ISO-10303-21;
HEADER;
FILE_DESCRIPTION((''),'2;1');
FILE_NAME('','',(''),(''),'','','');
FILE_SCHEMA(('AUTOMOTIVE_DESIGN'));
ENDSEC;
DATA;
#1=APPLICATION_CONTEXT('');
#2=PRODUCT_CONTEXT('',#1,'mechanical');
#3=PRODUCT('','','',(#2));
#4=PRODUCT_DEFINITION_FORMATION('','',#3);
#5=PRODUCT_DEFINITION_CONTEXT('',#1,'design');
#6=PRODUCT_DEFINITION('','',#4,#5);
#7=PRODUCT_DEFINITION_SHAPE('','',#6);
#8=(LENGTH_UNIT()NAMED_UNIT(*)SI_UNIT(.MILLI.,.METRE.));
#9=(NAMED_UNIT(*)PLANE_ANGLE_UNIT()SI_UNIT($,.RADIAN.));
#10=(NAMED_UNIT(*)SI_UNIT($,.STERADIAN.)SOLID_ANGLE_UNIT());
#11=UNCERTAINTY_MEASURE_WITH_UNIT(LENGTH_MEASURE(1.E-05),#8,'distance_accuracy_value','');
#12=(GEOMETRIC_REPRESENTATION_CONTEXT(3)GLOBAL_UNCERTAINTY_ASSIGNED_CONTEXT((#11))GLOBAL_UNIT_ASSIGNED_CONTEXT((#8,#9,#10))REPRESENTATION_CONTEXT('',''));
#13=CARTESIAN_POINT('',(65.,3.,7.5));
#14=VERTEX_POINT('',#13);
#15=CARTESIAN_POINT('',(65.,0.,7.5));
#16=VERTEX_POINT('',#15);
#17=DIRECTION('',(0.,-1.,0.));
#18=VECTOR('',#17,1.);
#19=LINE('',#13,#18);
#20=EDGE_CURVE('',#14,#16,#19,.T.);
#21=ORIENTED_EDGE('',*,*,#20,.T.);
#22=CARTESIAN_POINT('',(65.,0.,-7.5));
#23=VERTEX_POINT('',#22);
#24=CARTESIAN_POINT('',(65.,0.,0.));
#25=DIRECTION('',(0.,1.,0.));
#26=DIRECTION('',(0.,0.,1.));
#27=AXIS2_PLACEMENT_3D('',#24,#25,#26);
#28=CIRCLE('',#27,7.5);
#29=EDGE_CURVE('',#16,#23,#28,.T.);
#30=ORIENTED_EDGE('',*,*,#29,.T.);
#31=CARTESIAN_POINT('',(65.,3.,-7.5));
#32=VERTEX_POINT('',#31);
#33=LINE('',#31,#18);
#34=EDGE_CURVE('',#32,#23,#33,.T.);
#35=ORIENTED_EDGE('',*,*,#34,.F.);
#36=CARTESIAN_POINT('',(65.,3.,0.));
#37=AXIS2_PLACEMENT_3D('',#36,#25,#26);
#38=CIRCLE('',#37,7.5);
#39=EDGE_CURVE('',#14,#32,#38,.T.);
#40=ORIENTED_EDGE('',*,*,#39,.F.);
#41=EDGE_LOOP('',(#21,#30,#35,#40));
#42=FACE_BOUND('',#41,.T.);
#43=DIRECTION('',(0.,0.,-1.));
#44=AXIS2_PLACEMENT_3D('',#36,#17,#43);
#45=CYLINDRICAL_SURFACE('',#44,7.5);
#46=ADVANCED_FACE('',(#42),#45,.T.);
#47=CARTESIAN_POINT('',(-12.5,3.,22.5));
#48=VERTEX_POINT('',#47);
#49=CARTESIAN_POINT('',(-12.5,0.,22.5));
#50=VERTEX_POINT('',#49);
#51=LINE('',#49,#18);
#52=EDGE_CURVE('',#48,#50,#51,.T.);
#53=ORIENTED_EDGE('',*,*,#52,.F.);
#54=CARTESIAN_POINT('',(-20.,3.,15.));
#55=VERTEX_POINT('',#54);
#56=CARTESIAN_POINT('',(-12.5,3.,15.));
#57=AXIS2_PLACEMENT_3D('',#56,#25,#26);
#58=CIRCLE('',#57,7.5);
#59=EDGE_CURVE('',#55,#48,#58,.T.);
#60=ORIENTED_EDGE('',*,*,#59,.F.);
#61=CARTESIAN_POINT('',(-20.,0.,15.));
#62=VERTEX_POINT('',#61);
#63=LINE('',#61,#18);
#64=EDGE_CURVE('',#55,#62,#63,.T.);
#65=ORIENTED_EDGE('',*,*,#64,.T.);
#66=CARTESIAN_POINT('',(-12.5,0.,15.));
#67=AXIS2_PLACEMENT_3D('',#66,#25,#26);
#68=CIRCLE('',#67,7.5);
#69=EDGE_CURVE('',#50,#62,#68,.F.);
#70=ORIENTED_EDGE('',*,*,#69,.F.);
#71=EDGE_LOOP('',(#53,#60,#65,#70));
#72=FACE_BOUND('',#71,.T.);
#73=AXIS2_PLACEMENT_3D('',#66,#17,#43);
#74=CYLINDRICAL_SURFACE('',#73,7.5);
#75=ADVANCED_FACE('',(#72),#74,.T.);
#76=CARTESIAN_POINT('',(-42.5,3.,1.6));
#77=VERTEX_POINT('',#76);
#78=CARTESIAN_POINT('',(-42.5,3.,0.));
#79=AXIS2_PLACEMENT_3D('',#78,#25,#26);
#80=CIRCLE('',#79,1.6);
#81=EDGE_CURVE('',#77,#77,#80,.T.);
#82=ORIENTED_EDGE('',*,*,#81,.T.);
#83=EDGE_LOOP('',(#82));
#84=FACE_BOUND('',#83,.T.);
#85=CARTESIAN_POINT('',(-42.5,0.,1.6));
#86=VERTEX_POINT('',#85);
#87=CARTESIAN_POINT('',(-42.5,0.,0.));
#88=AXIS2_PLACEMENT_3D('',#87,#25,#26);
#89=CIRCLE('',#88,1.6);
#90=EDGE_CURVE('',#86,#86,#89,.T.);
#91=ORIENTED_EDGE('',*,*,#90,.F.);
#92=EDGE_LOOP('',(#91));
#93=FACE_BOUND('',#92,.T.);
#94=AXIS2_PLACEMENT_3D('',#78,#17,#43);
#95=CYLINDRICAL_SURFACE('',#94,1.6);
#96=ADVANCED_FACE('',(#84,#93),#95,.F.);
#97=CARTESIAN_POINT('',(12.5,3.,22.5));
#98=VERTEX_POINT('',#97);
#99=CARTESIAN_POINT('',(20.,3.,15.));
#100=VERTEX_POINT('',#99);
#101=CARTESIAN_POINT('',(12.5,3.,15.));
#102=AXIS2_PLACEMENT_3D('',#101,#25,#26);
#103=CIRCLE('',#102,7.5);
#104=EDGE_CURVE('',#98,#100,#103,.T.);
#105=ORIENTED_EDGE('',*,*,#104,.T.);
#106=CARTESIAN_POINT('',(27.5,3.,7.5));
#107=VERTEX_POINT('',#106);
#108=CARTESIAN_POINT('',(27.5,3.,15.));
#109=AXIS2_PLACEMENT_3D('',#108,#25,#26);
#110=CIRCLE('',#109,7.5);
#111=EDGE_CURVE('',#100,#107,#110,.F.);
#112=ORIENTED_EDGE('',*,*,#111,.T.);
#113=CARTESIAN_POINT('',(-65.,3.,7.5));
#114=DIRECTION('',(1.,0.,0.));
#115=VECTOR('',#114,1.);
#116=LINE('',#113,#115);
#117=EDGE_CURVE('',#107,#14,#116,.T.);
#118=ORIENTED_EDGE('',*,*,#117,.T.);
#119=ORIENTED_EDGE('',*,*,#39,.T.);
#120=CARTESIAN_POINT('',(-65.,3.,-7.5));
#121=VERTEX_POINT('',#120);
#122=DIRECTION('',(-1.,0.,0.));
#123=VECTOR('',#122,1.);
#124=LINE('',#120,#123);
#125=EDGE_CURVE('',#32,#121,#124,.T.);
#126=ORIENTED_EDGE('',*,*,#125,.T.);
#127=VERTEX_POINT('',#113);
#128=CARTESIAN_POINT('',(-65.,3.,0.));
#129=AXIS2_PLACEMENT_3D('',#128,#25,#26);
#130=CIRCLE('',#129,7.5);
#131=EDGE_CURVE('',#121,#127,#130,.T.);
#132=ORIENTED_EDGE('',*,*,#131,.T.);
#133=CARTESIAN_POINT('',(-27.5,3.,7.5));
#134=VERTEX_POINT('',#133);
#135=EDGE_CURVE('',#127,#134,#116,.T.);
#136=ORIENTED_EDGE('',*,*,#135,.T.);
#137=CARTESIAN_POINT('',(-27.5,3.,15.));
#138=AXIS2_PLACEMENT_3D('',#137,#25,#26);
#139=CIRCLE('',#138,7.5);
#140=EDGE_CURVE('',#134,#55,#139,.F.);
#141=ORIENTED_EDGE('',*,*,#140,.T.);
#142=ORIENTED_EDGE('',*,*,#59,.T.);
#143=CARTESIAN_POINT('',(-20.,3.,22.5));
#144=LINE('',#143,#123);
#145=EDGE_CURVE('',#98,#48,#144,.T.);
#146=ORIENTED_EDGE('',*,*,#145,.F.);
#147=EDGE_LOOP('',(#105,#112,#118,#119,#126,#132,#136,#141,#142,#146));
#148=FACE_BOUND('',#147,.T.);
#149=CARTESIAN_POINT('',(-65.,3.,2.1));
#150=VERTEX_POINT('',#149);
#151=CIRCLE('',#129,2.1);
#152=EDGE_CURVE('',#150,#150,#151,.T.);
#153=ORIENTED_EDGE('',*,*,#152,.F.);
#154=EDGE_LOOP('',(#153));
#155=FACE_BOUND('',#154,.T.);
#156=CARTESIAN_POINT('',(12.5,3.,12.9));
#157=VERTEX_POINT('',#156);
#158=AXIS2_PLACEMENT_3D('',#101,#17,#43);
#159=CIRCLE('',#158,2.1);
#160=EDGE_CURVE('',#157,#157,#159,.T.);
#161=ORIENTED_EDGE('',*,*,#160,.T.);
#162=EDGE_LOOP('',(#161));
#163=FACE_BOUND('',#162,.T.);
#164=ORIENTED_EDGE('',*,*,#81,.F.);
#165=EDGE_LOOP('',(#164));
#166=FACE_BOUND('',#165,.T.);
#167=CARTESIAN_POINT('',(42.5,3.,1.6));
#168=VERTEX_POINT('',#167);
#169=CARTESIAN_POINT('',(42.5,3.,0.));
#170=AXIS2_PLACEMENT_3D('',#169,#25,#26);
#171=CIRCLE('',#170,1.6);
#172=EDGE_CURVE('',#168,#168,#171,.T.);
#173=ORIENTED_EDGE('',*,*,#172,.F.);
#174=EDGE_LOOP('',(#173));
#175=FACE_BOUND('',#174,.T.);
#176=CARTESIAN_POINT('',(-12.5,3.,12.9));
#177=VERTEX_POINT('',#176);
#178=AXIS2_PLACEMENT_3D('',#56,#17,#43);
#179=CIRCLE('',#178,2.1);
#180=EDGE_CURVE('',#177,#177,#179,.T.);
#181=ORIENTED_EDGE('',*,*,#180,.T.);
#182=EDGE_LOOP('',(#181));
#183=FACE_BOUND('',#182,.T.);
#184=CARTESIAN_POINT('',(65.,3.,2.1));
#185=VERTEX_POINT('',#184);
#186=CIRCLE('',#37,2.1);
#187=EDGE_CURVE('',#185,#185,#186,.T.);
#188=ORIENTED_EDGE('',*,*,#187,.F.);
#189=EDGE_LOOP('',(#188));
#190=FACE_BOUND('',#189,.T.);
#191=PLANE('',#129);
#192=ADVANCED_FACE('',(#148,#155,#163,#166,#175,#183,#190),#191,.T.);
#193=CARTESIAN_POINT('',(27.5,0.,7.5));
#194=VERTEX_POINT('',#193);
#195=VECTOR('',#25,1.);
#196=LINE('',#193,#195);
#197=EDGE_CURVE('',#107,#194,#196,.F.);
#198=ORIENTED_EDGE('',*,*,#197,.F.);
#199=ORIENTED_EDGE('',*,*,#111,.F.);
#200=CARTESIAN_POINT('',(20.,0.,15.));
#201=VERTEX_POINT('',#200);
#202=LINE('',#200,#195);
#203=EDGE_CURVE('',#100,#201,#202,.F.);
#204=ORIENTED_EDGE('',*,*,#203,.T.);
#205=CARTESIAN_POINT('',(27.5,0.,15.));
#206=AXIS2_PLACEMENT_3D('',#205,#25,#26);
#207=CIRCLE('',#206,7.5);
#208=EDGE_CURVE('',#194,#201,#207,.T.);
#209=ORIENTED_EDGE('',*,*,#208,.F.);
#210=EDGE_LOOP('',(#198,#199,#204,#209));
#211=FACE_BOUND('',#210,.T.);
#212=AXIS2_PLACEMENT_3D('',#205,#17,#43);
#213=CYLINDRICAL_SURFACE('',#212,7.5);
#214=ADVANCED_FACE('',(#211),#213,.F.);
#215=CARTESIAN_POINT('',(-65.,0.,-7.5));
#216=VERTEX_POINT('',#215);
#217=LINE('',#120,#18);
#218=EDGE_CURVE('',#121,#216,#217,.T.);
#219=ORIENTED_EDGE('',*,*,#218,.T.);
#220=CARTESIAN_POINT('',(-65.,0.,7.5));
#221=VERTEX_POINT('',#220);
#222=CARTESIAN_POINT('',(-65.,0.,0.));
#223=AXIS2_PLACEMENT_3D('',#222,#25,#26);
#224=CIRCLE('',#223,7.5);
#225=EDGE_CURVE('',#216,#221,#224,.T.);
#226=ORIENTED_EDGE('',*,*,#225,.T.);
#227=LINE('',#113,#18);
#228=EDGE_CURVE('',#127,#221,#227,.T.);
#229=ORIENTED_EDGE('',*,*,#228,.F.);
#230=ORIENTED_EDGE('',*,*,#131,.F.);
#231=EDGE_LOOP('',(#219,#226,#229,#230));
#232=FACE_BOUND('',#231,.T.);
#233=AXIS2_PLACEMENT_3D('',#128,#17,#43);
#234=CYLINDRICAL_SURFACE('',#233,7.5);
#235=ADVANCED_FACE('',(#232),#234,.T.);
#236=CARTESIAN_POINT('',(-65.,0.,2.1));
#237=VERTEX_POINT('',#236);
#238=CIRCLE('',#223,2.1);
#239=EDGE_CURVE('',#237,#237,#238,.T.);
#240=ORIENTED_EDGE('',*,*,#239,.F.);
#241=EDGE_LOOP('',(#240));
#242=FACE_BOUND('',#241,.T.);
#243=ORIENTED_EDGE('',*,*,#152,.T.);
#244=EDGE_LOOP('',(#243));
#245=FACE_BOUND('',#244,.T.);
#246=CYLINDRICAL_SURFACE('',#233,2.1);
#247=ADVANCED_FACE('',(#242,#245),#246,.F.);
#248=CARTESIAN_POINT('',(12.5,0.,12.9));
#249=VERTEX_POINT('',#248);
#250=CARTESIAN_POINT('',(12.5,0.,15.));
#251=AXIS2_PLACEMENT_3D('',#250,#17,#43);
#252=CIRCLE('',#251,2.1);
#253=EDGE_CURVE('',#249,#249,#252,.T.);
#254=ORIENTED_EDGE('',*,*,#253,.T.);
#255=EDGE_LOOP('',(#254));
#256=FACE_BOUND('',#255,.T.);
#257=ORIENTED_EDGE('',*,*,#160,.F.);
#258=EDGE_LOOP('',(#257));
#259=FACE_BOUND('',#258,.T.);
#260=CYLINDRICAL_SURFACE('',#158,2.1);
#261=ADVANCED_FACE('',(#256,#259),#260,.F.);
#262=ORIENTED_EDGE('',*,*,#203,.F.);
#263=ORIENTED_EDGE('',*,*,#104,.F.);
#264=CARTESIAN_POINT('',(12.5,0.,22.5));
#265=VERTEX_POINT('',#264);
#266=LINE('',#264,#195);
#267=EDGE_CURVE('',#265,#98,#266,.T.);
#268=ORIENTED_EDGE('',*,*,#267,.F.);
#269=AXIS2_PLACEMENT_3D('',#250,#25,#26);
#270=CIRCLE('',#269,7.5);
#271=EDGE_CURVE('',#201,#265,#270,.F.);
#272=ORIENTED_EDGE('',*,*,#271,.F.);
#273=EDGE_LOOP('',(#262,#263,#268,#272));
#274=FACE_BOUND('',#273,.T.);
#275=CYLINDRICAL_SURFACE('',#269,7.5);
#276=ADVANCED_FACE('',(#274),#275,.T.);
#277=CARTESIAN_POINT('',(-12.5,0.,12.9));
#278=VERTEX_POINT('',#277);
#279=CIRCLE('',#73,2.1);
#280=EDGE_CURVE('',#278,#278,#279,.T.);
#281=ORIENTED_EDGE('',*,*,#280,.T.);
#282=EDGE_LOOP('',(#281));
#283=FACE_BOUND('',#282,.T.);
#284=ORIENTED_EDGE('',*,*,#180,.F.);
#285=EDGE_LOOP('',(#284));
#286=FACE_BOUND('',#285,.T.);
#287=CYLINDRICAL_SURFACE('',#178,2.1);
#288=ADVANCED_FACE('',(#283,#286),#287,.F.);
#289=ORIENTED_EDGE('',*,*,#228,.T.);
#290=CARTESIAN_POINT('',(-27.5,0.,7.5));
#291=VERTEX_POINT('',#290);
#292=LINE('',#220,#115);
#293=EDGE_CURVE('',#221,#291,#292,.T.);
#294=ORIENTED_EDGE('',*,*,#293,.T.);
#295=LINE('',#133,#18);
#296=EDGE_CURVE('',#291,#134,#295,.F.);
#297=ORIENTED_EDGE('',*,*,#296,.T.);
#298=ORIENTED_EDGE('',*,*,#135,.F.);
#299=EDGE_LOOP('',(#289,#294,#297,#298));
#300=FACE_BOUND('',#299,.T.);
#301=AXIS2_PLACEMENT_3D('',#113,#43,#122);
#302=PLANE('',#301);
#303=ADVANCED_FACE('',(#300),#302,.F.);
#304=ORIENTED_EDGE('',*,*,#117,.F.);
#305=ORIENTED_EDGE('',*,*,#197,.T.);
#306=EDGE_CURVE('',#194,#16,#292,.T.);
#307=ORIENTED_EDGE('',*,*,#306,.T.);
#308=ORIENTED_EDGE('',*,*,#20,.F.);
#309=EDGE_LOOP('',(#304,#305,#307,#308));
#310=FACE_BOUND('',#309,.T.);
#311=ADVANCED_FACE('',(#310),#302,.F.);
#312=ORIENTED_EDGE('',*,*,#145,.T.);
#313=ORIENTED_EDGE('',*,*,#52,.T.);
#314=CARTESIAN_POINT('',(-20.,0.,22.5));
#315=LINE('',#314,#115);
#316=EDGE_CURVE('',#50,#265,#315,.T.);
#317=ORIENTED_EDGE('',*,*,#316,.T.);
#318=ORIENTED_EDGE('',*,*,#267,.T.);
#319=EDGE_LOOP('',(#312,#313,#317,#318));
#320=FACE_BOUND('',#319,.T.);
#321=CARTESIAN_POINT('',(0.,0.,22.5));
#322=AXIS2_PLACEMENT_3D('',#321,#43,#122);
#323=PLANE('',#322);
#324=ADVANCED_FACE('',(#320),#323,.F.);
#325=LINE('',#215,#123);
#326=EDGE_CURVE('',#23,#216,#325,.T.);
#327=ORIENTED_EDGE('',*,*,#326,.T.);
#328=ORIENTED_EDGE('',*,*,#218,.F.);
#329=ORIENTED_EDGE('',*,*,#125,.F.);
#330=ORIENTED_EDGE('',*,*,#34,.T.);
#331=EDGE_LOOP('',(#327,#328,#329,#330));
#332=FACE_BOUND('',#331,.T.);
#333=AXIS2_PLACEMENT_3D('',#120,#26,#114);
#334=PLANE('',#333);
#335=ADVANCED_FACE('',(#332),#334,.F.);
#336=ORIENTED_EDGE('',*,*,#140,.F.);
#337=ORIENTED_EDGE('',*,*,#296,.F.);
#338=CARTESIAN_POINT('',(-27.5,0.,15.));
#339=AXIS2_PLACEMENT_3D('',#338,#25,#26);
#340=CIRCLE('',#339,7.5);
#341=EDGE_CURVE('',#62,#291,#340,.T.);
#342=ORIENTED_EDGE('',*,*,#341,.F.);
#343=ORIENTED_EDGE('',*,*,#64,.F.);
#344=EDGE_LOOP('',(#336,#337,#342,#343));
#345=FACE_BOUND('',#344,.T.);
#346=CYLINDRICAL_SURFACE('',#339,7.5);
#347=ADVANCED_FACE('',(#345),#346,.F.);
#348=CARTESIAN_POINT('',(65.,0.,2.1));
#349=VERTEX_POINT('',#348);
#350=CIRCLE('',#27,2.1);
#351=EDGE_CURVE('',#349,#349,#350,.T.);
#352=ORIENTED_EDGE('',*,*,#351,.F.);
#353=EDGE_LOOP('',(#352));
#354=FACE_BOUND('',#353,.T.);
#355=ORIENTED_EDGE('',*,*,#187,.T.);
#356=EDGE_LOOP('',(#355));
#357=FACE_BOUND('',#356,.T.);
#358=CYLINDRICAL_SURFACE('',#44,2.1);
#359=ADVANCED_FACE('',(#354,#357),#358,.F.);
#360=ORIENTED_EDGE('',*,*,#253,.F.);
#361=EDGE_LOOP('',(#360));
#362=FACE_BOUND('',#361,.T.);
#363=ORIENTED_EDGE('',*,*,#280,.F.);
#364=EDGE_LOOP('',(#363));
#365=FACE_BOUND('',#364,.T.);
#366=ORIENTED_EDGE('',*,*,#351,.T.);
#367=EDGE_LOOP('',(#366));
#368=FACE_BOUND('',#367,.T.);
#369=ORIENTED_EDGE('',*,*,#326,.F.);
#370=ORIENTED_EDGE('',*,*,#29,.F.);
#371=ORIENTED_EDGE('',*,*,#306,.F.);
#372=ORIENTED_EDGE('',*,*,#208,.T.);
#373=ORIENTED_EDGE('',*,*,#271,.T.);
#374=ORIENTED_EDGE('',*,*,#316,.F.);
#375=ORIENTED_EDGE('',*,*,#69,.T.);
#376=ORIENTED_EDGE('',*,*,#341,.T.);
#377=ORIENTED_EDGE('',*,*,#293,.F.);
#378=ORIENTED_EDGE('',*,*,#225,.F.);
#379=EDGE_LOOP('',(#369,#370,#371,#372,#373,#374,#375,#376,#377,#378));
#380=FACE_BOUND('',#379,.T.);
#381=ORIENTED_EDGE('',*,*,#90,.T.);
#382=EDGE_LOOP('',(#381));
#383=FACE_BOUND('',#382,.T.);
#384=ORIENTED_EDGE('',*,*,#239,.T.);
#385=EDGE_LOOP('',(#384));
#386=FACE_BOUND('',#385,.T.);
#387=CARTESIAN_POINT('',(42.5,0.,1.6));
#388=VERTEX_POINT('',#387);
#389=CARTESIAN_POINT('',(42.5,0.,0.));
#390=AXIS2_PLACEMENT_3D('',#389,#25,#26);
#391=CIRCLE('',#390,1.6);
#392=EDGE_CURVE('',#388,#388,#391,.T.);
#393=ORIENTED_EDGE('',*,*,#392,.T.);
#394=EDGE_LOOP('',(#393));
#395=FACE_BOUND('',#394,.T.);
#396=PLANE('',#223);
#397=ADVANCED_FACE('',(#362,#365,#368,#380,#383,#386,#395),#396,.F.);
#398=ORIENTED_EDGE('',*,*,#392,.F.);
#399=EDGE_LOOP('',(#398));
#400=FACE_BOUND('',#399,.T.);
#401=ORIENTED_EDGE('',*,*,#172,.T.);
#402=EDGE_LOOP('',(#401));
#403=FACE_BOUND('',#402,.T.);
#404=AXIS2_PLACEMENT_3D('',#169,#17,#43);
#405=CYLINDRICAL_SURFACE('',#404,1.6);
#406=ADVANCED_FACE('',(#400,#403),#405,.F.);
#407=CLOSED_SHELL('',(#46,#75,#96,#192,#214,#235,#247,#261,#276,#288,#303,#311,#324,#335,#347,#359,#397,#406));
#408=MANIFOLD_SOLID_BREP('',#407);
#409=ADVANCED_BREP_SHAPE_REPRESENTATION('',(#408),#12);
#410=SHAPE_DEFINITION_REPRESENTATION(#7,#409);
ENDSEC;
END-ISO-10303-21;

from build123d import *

# Parameters (mm, degrees)
SKETCH_1_R          = 1.6
SKETCH_1_R_2        = 2.1
EXTRUDE_1_DEPTH     = 3
SKETCH_3_W          = 40
SKETCH_3_H          = 3
EXTRUDE_3_DEPTH     = 15
SKETCH_2_R          = 2.1
CUT_EXTRUDE_1_DEPTH = 76.970388968
FILLET_START        = -1
FILLET_2_DEPTH      = 5
FILLET_2_2_DEPTH    = 3


with BuildPart() as part:
    # 草图1 → 凸台-拉伸1 (new body)
    with BuildSketch(Plane(origin=(0, 0, 0), x_dir=(1, 0, 0), z_dir=(0, 1, 0))):
        with BuildLine():
            Line((-65, 7.5), (65, 7.5))
            ThreePointArc((65, 7.5), (72.5, 0), (65, -7.5))
            Line((65, -7.5), (-65, -7.5))
            ThreePointArc((-65, -7.5), (-72.5, 0), (-65, 7.5))
        make_face()
        with Locations(Location((-42.5, 0, 0), (0, 0, 270))):
            Circle(SKETCH_1_R, mode=Mode.SUBTRACT)
        with Locations(Location((-65, 0, 0), (0, 0, 270))):
            Circle(SKETCH_1_R_2, mode=Mode.SUBTRACT)
        with Locations(Location((65, 0, 0), (0, 0, 270))):
            Circle(SKETCH_1_R_2, mode=Mode.SUBTRACT)
        with Locations(Location((42.5, 0, 0), (0, 0, 270))):
            Circle(SKETCH_1_R, mode=Mode.SUBTRACT)
    extrude(amount=EXTRUDE_1_DEPTH)

    # 草图3 → 凸台-拉伸3 (add)
    with BuildSketch(Plane.XY.offset(7.5)):
        with Locations((0, 1.5)):
            Rectangle(SKETCH_3_W, SKETCH_3_H)
    extrude(amount=EXTRUDE_3_DEPTH)

    # 草图2 → 切除-拉伸1 (cut, through all)
    with BuildSketch(Plane.XZ):
        with Locations(Location((-12.5, 15, 0), (0, 0, 270))):
            Circle(SKETCH_2_R)
        with Locations(Location((12.5, 15, 0), (0, 0, 270))):
            Circle(SKETCH_2_R)
    extrude(amount=-CUT_EXTRUDE_1_DEPTH, mode=Mode.SUBTRACT)

    # 圆角2: read off the stored shape, not the designer's step
    # 圆角2 outline → 圆角2 (cut)
    with BuildSketch(Plane(origin=(0, 0, 0), x_dir=(1, 0, 0), z_dir=(0, 1, 0)).offset(FILLET_START)):
        with BuildLine():
            ThreePointArc((20, -15), (17.803300859, -20.303300859), (12.5, -22.5))
            Line((12.5, -22.5), (20, -22.5))
            Line((20, -22.5), (20, -15))
        make_face()
        with BuildLine():
            Line((-20, -22.5), (-12.5, -22.5))
            ThreePointArc((-12.5, -22.5), (-17.803300859, -20.303300859), (-20, -15))
            Line((-20, -15), (-20, -22.5))
        make_face()
    extrude(amount=FILLET_2_DEPTH, mode=Mode.SUBTRACT)

    # Fillet 2 2 outline → Fillet 2 2 (add)
    with BuildSketch(Plane(origin=(0, 0, 0), x_dir=(1, 0, 0), z_dir=(0, 1, 0))):
        with BuildLine():
            Line((20, -7.5), (20, -15))
            ThreePointArc((20, -15), (22.196699141, -9.696699141), (27.5, -7.5))
            Line((27.5, -7.5), (20, -7.5))
        make_face()
        with BuildLine():
            ThreePointArc((-27.5, -7.5), (-22.196699141, -9.696699141), (-20, -15))
            Line((-20, -15), (-20, -7.5))
            Line((-20, -7.5), (-27.5, -7.5))
        make_face()
    extrude(amount=FILLET_2_2_DEPTH)


solid = part.part
